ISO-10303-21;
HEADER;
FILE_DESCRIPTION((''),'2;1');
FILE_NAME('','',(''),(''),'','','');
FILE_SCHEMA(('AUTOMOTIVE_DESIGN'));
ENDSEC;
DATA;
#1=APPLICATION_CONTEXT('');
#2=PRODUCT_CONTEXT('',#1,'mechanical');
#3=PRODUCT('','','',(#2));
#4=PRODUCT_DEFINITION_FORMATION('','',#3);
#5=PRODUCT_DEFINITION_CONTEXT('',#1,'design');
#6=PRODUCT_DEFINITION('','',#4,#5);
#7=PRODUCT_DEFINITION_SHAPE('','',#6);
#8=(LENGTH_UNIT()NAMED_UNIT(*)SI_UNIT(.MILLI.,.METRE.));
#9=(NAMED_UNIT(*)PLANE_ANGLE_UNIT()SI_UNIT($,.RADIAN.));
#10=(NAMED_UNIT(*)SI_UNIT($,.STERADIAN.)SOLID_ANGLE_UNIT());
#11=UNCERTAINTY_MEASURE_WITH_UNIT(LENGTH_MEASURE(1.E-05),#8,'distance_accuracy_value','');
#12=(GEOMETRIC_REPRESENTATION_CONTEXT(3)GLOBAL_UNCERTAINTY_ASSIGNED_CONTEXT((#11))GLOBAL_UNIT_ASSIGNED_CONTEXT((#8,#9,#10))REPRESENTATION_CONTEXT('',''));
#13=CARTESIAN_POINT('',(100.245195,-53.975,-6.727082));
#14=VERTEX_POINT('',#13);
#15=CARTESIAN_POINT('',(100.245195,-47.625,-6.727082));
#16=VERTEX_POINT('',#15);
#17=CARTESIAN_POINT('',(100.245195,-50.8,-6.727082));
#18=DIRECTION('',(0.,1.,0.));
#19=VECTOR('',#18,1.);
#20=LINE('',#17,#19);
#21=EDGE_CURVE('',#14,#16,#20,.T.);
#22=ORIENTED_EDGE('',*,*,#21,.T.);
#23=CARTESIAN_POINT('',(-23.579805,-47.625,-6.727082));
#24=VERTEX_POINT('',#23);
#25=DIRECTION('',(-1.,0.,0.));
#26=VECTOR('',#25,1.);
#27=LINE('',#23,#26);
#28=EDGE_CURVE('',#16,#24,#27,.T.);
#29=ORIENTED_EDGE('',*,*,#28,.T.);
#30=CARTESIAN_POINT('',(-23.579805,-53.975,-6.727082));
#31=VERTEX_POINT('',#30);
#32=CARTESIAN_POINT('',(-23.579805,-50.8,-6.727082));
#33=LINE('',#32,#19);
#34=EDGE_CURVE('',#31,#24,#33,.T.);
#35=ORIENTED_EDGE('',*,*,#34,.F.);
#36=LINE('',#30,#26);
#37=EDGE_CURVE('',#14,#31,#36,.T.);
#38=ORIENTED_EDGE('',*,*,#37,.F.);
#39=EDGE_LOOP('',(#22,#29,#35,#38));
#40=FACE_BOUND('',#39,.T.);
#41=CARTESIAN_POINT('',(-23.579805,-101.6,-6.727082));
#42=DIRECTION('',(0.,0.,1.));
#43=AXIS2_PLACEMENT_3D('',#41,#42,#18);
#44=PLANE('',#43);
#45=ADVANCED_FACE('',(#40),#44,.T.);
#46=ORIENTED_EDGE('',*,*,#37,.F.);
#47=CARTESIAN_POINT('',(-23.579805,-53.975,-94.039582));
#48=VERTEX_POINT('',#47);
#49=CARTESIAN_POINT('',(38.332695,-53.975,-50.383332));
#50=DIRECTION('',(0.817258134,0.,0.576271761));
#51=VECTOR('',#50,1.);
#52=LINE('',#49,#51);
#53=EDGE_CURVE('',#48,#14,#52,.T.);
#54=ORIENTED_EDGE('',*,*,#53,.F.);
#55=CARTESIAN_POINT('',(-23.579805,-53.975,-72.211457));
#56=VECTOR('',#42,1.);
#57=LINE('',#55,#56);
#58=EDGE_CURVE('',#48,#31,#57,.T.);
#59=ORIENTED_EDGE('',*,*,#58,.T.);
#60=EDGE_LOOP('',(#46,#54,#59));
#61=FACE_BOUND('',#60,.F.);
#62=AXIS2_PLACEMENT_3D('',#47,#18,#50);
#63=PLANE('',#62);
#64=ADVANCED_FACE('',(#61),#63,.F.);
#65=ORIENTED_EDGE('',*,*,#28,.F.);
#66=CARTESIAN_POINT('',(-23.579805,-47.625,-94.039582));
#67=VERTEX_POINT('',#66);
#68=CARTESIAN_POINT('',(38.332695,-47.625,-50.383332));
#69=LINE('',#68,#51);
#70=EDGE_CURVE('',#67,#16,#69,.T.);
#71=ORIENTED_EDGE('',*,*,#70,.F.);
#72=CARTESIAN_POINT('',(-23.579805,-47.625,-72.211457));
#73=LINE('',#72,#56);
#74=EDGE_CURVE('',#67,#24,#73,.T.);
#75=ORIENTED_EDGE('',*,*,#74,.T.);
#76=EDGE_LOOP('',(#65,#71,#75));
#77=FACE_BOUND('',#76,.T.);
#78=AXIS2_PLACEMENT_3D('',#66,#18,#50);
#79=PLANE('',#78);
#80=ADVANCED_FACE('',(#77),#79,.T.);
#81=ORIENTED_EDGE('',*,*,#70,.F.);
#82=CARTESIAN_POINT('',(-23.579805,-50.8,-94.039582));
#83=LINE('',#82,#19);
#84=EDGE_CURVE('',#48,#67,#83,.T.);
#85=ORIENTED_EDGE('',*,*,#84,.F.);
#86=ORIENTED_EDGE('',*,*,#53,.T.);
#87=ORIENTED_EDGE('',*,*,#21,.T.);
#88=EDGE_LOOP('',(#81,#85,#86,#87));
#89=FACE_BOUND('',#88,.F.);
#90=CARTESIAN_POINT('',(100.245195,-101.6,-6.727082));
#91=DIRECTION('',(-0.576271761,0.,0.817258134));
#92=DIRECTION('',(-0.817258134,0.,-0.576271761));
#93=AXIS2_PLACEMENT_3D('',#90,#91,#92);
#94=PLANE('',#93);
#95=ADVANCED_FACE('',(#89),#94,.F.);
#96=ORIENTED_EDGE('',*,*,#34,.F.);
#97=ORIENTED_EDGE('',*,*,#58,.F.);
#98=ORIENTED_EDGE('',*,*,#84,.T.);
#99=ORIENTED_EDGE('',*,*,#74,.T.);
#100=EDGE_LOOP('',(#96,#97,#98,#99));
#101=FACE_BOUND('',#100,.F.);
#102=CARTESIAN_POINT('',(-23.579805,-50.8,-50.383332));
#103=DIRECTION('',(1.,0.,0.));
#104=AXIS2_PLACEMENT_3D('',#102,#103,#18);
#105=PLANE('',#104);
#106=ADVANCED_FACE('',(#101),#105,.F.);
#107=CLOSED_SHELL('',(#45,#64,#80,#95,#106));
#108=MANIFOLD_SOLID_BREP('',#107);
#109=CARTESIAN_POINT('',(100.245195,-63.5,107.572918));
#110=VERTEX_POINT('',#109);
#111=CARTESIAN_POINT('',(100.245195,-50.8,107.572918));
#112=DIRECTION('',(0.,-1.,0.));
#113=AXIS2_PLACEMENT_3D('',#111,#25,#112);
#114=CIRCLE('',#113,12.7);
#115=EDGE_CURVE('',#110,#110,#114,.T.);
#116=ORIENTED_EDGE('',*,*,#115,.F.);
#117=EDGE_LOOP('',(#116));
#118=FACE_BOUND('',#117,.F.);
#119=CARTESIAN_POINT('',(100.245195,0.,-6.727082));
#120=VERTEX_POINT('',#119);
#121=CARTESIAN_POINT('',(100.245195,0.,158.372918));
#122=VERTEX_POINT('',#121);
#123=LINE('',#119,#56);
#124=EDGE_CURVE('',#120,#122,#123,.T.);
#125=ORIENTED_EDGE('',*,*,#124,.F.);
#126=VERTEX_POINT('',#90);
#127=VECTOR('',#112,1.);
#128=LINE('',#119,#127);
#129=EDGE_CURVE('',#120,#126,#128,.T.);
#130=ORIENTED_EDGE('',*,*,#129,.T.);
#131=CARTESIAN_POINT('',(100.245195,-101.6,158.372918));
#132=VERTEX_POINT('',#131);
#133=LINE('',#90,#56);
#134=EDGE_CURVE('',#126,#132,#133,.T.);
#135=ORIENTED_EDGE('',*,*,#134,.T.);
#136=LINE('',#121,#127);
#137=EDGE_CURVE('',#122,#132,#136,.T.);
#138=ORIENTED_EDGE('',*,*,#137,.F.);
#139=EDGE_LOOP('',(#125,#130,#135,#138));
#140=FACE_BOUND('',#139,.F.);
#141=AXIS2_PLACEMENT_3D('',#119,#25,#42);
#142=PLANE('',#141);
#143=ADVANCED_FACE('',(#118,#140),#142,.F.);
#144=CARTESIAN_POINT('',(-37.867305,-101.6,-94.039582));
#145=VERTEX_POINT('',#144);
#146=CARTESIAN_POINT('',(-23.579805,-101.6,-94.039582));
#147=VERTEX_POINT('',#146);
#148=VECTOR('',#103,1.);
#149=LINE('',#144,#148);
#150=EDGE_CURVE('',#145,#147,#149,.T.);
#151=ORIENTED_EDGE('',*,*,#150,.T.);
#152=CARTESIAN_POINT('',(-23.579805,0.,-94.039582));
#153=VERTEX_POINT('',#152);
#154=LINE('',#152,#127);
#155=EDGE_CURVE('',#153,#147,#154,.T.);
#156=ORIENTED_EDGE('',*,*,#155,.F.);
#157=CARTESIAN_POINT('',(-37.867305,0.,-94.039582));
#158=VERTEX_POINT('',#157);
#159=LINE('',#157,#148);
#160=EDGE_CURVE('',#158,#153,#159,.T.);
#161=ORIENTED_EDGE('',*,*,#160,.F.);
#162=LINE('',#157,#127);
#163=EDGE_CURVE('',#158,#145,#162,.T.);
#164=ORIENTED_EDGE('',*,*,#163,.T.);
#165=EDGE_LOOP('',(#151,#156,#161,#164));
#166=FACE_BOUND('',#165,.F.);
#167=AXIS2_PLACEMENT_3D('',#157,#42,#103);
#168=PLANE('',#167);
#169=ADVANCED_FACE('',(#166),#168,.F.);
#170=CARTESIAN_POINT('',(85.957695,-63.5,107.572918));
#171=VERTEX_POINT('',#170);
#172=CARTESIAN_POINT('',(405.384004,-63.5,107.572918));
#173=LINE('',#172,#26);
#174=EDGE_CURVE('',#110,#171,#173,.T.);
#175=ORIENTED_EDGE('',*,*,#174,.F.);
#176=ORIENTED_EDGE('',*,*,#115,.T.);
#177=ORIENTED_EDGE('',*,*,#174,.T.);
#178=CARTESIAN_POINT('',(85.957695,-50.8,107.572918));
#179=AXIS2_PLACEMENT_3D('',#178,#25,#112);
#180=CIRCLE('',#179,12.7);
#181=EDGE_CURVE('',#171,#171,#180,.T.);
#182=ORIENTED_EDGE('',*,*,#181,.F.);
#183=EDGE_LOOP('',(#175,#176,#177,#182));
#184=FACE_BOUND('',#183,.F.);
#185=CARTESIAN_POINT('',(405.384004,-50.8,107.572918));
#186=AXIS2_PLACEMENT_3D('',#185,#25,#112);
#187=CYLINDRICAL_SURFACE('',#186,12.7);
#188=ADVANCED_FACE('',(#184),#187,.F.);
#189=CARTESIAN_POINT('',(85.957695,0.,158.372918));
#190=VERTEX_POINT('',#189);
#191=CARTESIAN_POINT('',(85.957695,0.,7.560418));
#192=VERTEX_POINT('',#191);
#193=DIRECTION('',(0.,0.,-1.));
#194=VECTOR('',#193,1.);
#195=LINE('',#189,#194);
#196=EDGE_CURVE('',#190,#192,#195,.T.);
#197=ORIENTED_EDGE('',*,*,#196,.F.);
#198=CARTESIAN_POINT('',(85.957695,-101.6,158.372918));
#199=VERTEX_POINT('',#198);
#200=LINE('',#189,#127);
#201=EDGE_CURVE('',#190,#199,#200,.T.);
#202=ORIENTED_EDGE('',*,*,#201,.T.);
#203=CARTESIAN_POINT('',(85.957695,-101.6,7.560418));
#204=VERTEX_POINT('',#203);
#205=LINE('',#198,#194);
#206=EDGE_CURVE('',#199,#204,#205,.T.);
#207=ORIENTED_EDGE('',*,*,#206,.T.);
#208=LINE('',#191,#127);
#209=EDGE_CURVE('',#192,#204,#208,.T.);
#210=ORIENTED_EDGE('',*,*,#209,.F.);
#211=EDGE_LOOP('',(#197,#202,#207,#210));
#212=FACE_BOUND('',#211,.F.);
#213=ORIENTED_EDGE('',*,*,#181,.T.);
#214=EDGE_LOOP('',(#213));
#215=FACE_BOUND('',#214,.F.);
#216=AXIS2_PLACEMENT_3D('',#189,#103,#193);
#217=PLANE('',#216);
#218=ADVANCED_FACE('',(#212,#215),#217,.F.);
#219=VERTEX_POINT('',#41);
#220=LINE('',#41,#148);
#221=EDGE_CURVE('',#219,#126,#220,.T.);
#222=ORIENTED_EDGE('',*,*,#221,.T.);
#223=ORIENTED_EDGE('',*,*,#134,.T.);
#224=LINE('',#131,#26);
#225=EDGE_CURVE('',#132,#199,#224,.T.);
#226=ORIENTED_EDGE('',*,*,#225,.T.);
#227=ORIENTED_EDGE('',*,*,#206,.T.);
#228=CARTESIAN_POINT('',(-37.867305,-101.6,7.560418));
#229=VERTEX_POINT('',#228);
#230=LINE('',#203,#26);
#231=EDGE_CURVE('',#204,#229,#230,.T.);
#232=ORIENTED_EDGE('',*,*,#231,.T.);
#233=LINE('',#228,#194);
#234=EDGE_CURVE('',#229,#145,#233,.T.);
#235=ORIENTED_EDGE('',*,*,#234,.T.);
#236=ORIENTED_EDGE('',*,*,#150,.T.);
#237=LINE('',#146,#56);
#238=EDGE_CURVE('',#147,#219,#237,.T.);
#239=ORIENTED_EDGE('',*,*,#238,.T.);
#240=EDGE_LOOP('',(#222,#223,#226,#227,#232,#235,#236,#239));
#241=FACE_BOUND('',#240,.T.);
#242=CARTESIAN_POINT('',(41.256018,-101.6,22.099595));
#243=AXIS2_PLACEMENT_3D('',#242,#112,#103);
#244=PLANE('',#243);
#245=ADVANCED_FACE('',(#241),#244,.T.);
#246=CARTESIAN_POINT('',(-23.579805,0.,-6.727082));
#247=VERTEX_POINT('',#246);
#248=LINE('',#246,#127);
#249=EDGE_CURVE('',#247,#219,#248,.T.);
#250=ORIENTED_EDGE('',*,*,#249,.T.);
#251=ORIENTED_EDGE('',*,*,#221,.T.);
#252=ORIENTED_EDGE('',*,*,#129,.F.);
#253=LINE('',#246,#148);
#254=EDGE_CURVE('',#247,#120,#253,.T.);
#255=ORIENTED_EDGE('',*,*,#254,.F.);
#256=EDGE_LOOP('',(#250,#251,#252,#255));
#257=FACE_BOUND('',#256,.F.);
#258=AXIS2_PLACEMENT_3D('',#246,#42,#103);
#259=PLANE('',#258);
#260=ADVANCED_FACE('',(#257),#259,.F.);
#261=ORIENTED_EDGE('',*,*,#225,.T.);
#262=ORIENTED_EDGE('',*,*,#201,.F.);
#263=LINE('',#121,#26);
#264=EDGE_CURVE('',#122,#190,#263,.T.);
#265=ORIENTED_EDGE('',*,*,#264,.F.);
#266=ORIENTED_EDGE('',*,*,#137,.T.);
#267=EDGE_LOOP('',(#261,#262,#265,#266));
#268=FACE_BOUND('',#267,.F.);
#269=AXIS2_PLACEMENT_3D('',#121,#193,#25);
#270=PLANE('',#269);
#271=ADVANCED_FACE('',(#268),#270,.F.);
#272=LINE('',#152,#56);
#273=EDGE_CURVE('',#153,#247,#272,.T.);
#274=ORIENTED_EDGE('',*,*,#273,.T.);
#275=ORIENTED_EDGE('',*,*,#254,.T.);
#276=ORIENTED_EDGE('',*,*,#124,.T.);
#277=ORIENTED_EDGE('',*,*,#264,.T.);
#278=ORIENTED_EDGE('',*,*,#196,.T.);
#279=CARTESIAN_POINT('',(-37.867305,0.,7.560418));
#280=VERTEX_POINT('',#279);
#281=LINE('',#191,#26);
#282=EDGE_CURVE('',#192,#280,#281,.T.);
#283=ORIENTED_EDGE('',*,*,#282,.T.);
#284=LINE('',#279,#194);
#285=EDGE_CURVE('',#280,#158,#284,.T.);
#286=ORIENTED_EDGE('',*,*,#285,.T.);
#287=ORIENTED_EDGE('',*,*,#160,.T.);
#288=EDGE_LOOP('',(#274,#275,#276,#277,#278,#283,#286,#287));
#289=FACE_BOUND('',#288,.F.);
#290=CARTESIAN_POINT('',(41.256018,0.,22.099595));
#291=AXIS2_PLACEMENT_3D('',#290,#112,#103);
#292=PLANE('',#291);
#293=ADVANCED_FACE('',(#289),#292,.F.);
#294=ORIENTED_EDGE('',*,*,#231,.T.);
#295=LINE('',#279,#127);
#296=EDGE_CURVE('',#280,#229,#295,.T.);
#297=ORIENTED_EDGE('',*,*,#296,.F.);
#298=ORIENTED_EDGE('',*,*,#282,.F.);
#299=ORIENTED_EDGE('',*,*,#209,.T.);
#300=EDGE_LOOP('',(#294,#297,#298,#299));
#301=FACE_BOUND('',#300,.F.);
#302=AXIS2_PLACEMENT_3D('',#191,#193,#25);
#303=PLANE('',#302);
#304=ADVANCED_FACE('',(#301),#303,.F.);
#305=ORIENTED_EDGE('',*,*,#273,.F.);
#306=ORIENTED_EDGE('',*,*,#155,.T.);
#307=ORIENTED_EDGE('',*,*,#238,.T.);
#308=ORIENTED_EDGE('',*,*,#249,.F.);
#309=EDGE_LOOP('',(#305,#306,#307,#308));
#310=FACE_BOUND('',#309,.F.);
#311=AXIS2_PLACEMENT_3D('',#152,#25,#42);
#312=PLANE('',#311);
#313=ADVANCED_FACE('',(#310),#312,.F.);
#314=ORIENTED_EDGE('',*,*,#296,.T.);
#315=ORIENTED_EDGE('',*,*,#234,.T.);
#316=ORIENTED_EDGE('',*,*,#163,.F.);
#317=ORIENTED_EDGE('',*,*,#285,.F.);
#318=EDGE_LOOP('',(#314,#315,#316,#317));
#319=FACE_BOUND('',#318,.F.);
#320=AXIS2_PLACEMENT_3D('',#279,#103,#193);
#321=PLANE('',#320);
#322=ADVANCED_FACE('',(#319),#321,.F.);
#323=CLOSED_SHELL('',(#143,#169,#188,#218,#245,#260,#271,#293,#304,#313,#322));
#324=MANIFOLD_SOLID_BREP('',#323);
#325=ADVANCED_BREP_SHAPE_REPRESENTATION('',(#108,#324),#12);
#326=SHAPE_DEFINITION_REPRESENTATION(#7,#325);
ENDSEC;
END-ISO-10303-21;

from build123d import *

# Parameters (mm, degrees)
F1_DEPTH  = 101.6
F3_D      = 25.4
F4_W      = 101.6
F4_H      = 87.3125
F5_DEPTH  = 123.825
F7_DEPTH  = 101.601
F8_W      = 151.5127165662
F8_H      = 47.625
F9_DEPTH  = 214.5206515044
F10_DEPTH = 214.5206515044


with BuildPart() as f1:
    # F0 (on Front) → F1 (new body)
    with BuildSketch(Plane.XZ):
        Polygon((-37.8673051461, 7.5604184782), (-37.8673051461, -94.0395815218), (-23.5798051461, -94.0395815218), (-23.5798051461, -6.7270815218), (100.2451948539, -6.7270815218), (100.2451948539, 158.3729184782), (85.9576948539, 158.3729184782), (85.9576948539, 7.5604184782), align=None)
    extrude(amount=F1_DEPTH)

    # F3 (through all)
    with Locations(Plane.YZ.offset(100.2451948539)):
        with Locations((-50.8, 107.5729184782)):
            Hole(F3_D / 2)


with BuildPart() as f5:
    # F4 (on face) → F5 (new body, through all)
    with BuildSketch(Plane.YZ.offset(-23.5798051461)):
        with Locations((-50.8, -50.3833315218)):
            Rectangle(F4_W, F4_H)
    extrude(amount=F5_DEPTH)

    # F6 (on face) → F7 (cut, through all)
    with BuildSketch(Plane.XZ.offset(101.6)):
        Polygon((100.2451948539, -6.7270815218), (-23.5798051461, -94.0395815218), (100.2451948539, -94.0395815218), align=None)
    extrude(amount=-F7_DEPTH, mode=Mode.SUBTRACT)

    # F8 (on face) → F9 (cut, through all)
    with BuildSketch(Plane(origin=(36.4585458515, 0, -51.704846844), x_dir=(0.8172581339, 0, 0.5762717611), z_dir=(0.5762717611, 0, -0.8172581339))):
        with Locations((2.2932154783, 77.7875)):
            Rectangle(F8_W, F8_H)
    extrude(amount=-F9_DEPTH, mode=Mode.SUBTRACT)

    # F8 (on face) → F10 (cut, through all)
    with BuildSketch(Plane(origin=(36.4585458515, 0, -51.704846844), x_dir=(0.8172581339, 0, 0.5762717611), z_dir=(0.5762717611, 0, -0.8172581339))):
        with Locations((2.2932154783, 23.8125)):
            Rectangle(F8_W, F8_H)
    extrude(amount=-F10_DEPTH, mode=Mode.SUBTRACT)


solid = Compound([f1.part, f5.part])
